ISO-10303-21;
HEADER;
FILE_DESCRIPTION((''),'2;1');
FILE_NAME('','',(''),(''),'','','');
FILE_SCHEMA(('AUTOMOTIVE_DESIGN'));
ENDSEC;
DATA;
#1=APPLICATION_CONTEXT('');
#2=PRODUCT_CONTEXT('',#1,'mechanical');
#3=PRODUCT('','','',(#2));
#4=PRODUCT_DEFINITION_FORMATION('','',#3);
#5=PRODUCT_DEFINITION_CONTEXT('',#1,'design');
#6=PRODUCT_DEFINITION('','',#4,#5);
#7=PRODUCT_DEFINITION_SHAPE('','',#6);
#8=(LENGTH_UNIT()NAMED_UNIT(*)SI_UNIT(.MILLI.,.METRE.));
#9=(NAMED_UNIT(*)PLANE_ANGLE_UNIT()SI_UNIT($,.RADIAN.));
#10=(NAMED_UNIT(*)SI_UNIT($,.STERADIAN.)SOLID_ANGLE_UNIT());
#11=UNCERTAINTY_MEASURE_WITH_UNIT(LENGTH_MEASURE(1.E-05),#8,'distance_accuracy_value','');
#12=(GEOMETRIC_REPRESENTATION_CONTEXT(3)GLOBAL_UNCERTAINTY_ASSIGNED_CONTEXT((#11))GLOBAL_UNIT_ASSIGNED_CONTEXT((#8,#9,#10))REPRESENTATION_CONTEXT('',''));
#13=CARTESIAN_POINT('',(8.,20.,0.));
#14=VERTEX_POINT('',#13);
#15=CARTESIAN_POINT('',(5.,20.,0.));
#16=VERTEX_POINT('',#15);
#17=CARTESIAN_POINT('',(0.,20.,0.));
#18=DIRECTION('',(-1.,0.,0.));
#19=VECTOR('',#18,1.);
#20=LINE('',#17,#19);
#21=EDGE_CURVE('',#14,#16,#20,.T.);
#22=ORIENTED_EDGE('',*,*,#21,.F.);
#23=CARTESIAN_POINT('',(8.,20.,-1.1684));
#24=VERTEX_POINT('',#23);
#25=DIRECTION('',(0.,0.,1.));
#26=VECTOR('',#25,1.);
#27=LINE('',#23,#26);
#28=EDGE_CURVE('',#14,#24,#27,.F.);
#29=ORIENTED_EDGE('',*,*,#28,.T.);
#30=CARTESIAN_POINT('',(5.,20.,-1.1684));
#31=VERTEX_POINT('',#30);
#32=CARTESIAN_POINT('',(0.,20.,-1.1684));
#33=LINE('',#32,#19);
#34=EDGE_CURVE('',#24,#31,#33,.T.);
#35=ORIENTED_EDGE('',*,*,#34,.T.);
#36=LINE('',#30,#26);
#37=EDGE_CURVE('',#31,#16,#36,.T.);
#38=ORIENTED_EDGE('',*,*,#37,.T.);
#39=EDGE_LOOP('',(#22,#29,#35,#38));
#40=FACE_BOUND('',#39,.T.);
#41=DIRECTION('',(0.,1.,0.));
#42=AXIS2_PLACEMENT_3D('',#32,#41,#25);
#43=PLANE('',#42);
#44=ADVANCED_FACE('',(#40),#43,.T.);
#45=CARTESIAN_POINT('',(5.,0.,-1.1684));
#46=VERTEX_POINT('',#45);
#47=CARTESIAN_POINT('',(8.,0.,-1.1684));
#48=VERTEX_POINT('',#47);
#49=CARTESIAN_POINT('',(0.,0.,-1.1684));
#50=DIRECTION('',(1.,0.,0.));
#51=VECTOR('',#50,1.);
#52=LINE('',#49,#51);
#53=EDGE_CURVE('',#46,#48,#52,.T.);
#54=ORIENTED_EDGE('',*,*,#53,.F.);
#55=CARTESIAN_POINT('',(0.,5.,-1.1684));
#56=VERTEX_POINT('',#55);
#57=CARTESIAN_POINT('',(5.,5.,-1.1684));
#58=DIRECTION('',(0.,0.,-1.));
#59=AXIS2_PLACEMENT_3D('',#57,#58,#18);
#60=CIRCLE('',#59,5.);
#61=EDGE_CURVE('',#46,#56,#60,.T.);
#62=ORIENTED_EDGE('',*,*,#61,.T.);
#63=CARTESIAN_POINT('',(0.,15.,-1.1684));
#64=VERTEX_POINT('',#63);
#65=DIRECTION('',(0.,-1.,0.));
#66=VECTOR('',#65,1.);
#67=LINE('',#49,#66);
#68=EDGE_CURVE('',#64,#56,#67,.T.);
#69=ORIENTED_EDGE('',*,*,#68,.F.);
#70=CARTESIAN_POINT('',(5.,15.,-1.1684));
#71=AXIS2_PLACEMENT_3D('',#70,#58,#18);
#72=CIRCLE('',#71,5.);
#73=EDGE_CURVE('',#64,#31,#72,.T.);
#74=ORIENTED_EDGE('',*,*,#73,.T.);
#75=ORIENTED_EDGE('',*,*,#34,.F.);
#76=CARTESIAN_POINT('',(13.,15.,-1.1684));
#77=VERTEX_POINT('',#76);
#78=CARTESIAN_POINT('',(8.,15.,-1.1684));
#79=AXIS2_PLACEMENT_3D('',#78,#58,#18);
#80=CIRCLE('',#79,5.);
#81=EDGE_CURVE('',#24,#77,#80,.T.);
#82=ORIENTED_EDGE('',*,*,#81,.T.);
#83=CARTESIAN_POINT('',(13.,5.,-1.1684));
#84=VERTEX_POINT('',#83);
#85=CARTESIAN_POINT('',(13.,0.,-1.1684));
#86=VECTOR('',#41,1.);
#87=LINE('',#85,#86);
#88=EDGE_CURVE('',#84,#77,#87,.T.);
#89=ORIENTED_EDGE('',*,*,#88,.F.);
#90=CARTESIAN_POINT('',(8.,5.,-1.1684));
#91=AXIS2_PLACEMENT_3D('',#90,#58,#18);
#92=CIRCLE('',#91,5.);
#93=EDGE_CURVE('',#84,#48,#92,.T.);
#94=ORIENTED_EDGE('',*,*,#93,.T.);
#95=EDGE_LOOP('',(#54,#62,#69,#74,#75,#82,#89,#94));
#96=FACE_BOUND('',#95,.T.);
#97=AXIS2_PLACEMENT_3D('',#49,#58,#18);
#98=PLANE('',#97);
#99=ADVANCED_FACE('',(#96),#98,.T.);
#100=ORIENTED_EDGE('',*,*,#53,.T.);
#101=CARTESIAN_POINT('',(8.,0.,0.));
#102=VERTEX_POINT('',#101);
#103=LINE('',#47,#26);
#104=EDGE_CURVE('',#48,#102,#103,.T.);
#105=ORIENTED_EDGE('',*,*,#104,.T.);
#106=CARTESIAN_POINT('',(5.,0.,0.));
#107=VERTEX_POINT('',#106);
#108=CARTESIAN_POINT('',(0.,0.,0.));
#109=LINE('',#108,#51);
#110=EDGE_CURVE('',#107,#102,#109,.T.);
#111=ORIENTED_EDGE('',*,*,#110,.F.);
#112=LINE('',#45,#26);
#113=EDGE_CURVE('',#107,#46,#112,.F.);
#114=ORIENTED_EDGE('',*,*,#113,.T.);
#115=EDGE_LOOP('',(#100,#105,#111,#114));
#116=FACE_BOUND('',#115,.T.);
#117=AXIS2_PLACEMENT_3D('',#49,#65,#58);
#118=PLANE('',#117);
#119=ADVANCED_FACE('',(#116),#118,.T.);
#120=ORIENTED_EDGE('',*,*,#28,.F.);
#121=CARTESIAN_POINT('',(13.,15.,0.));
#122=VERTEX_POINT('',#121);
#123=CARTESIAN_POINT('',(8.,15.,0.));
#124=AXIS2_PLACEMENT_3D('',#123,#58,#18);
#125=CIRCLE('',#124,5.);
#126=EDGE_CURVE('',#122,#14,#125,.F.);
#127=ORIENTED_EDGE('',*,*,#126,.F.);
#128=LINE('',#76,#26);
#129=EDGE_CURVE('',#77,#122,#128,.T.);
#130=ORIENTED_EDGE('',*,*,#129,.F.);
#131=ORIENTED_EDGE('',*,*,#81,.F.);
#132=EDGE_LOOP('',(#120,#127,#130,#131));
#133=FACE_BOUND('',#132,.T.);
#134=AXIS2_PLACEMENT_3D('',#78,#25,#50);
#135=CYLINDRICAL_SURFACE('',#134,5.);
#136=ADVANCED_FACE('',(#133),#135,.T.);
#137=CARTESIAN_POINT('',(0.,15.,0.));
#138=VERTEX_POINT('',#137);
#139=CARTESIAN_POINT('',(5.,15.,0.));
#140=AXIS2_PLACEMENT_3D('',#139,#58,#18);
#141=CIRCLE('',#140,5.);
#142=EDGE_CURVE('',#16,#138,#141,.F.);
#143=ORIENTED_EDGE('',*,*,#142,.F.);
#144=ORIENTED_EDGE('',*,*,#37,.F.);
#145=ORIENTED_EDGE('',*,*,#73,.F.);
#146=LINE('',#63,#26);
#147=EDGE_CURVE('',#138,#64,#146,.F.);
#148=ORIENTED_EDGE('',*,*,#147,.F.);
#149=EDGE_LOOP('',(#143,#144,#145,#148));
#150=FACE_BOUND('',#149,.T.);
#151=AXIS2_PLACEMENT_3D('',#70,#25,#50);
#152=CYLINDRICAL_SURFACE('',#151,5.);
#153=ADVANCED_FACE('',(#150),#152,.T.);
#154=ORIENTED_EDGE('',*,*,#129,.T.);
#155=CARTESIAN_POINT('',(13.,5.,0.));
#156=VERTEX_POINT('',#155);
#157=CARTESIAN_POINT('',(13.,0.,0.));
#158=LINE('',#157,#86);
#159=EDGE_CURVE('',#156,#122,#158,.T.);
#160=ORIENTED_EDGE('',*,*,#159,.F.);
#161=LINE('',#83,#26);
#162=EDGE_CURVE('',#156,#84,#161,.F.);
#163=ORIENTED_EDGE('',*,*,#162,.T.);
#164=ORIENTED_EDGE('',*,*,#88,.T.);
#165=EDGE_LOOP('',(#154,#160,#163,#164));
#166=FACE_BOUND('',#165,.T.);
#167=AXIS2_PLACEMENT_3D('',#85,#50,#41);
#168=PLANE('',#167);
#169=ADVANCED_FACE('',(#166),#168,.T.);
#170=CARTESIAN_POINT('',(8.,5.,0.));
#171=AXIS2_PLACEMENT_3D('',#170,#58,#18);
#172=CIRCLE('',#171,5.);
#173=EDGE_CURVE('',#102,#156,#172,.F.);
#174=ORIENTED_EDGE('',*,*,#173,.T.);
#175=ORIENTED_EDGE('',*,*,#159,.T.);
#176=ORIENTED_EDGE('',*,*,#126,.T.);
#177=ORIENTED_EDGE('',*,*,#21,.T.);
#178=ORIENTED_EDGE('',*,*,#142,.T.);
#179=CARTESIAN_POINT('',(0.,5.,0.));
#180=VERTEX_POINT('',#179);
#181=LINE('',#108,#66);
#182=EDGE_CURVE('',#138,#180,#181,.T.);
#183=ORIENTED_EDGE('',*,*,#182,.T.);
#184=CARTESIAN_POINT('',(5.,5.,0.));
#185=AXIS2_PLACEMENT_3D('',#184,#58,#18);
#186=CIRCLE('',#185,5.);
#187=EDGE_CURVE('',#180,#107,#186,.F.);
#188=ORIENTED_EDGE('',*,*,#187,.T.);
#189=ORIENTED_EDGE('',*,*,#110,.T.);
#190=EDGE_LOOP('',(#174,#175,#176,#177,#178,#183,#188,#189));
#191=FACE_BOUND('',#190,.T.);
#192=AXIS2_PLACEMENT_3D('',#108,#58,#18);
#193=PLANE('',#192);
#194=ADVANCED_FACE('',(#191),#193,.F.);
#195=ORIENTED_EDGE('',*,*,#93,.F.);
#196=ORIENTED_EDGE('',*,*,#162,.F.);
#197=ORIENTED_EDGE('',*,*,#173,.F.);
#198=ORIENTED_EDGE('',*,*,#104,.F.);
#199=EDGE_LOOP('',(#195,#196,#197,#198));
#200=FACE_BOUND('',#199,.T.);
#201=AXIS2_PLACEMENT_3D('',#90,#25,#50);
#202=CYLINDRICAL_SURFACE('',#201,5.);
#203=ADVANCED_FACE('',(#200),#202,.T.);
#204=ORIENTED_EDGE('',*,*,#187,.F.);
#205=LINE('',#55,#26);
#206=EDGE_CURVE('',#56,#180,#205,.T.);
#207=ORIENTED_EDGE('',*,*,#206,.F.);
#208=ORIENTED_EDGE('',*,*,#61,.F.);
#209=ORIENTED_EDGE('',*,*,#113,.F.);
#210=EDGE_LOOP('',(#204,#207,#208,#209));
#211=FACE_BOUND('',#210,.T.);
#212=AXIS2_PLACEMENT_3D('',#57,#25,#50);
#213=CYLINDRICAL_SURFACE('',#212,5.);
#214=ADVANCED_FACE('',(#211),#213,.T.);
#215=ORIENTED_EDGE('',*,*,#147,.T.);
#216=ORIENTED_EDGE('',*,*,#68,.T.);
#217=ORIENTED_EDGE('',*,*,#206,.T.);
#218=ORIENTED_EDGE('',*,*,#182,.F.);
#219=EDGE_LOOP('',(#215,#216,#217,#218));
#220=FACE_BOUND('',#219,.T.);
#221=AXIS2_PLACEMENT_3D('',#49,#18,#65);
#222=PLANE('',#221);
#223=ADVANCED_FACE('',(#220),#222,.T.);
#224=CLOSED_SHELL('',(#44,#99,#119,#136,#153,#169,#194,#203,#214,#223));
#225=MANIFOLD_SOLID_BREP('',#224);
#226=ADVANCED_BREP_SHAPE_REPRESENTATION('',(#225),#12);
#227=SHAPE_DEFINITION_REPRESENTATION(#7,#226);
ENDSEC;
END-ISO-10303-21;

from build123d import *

# Parameters (mm, degrees)
SKETCH1_W          = 13
SKETCH1_H          = 20
BASE_FLANGE1_DEPTH = 1.1684
FILLET1_R          = 5


# Sheet-metal steps are written as plain solids
with BuildPart() as part:
    # Sketch1 → Base-Flange1 (new body)
    with BuildSketch(Plane.XY):
        with Locations((6.5, 10)):
            Rectangle(SKETCH1_W, SKETCH1_H)
    extrude(amount=-BASE_FLANGE1_DEPTH)

    # Fillet1
    fillet1_edges = [part.edges().sort_by_distance(p)[0] for p in [
        (0, 20, -0.5842),
        (13, 20, -0.5842),
        (13, 0, -0.5842),
        (0, 0, -0.5842),
    ]]
    fillet(fillet1_edges, radius=FILLET1_R)


solid = part.part
